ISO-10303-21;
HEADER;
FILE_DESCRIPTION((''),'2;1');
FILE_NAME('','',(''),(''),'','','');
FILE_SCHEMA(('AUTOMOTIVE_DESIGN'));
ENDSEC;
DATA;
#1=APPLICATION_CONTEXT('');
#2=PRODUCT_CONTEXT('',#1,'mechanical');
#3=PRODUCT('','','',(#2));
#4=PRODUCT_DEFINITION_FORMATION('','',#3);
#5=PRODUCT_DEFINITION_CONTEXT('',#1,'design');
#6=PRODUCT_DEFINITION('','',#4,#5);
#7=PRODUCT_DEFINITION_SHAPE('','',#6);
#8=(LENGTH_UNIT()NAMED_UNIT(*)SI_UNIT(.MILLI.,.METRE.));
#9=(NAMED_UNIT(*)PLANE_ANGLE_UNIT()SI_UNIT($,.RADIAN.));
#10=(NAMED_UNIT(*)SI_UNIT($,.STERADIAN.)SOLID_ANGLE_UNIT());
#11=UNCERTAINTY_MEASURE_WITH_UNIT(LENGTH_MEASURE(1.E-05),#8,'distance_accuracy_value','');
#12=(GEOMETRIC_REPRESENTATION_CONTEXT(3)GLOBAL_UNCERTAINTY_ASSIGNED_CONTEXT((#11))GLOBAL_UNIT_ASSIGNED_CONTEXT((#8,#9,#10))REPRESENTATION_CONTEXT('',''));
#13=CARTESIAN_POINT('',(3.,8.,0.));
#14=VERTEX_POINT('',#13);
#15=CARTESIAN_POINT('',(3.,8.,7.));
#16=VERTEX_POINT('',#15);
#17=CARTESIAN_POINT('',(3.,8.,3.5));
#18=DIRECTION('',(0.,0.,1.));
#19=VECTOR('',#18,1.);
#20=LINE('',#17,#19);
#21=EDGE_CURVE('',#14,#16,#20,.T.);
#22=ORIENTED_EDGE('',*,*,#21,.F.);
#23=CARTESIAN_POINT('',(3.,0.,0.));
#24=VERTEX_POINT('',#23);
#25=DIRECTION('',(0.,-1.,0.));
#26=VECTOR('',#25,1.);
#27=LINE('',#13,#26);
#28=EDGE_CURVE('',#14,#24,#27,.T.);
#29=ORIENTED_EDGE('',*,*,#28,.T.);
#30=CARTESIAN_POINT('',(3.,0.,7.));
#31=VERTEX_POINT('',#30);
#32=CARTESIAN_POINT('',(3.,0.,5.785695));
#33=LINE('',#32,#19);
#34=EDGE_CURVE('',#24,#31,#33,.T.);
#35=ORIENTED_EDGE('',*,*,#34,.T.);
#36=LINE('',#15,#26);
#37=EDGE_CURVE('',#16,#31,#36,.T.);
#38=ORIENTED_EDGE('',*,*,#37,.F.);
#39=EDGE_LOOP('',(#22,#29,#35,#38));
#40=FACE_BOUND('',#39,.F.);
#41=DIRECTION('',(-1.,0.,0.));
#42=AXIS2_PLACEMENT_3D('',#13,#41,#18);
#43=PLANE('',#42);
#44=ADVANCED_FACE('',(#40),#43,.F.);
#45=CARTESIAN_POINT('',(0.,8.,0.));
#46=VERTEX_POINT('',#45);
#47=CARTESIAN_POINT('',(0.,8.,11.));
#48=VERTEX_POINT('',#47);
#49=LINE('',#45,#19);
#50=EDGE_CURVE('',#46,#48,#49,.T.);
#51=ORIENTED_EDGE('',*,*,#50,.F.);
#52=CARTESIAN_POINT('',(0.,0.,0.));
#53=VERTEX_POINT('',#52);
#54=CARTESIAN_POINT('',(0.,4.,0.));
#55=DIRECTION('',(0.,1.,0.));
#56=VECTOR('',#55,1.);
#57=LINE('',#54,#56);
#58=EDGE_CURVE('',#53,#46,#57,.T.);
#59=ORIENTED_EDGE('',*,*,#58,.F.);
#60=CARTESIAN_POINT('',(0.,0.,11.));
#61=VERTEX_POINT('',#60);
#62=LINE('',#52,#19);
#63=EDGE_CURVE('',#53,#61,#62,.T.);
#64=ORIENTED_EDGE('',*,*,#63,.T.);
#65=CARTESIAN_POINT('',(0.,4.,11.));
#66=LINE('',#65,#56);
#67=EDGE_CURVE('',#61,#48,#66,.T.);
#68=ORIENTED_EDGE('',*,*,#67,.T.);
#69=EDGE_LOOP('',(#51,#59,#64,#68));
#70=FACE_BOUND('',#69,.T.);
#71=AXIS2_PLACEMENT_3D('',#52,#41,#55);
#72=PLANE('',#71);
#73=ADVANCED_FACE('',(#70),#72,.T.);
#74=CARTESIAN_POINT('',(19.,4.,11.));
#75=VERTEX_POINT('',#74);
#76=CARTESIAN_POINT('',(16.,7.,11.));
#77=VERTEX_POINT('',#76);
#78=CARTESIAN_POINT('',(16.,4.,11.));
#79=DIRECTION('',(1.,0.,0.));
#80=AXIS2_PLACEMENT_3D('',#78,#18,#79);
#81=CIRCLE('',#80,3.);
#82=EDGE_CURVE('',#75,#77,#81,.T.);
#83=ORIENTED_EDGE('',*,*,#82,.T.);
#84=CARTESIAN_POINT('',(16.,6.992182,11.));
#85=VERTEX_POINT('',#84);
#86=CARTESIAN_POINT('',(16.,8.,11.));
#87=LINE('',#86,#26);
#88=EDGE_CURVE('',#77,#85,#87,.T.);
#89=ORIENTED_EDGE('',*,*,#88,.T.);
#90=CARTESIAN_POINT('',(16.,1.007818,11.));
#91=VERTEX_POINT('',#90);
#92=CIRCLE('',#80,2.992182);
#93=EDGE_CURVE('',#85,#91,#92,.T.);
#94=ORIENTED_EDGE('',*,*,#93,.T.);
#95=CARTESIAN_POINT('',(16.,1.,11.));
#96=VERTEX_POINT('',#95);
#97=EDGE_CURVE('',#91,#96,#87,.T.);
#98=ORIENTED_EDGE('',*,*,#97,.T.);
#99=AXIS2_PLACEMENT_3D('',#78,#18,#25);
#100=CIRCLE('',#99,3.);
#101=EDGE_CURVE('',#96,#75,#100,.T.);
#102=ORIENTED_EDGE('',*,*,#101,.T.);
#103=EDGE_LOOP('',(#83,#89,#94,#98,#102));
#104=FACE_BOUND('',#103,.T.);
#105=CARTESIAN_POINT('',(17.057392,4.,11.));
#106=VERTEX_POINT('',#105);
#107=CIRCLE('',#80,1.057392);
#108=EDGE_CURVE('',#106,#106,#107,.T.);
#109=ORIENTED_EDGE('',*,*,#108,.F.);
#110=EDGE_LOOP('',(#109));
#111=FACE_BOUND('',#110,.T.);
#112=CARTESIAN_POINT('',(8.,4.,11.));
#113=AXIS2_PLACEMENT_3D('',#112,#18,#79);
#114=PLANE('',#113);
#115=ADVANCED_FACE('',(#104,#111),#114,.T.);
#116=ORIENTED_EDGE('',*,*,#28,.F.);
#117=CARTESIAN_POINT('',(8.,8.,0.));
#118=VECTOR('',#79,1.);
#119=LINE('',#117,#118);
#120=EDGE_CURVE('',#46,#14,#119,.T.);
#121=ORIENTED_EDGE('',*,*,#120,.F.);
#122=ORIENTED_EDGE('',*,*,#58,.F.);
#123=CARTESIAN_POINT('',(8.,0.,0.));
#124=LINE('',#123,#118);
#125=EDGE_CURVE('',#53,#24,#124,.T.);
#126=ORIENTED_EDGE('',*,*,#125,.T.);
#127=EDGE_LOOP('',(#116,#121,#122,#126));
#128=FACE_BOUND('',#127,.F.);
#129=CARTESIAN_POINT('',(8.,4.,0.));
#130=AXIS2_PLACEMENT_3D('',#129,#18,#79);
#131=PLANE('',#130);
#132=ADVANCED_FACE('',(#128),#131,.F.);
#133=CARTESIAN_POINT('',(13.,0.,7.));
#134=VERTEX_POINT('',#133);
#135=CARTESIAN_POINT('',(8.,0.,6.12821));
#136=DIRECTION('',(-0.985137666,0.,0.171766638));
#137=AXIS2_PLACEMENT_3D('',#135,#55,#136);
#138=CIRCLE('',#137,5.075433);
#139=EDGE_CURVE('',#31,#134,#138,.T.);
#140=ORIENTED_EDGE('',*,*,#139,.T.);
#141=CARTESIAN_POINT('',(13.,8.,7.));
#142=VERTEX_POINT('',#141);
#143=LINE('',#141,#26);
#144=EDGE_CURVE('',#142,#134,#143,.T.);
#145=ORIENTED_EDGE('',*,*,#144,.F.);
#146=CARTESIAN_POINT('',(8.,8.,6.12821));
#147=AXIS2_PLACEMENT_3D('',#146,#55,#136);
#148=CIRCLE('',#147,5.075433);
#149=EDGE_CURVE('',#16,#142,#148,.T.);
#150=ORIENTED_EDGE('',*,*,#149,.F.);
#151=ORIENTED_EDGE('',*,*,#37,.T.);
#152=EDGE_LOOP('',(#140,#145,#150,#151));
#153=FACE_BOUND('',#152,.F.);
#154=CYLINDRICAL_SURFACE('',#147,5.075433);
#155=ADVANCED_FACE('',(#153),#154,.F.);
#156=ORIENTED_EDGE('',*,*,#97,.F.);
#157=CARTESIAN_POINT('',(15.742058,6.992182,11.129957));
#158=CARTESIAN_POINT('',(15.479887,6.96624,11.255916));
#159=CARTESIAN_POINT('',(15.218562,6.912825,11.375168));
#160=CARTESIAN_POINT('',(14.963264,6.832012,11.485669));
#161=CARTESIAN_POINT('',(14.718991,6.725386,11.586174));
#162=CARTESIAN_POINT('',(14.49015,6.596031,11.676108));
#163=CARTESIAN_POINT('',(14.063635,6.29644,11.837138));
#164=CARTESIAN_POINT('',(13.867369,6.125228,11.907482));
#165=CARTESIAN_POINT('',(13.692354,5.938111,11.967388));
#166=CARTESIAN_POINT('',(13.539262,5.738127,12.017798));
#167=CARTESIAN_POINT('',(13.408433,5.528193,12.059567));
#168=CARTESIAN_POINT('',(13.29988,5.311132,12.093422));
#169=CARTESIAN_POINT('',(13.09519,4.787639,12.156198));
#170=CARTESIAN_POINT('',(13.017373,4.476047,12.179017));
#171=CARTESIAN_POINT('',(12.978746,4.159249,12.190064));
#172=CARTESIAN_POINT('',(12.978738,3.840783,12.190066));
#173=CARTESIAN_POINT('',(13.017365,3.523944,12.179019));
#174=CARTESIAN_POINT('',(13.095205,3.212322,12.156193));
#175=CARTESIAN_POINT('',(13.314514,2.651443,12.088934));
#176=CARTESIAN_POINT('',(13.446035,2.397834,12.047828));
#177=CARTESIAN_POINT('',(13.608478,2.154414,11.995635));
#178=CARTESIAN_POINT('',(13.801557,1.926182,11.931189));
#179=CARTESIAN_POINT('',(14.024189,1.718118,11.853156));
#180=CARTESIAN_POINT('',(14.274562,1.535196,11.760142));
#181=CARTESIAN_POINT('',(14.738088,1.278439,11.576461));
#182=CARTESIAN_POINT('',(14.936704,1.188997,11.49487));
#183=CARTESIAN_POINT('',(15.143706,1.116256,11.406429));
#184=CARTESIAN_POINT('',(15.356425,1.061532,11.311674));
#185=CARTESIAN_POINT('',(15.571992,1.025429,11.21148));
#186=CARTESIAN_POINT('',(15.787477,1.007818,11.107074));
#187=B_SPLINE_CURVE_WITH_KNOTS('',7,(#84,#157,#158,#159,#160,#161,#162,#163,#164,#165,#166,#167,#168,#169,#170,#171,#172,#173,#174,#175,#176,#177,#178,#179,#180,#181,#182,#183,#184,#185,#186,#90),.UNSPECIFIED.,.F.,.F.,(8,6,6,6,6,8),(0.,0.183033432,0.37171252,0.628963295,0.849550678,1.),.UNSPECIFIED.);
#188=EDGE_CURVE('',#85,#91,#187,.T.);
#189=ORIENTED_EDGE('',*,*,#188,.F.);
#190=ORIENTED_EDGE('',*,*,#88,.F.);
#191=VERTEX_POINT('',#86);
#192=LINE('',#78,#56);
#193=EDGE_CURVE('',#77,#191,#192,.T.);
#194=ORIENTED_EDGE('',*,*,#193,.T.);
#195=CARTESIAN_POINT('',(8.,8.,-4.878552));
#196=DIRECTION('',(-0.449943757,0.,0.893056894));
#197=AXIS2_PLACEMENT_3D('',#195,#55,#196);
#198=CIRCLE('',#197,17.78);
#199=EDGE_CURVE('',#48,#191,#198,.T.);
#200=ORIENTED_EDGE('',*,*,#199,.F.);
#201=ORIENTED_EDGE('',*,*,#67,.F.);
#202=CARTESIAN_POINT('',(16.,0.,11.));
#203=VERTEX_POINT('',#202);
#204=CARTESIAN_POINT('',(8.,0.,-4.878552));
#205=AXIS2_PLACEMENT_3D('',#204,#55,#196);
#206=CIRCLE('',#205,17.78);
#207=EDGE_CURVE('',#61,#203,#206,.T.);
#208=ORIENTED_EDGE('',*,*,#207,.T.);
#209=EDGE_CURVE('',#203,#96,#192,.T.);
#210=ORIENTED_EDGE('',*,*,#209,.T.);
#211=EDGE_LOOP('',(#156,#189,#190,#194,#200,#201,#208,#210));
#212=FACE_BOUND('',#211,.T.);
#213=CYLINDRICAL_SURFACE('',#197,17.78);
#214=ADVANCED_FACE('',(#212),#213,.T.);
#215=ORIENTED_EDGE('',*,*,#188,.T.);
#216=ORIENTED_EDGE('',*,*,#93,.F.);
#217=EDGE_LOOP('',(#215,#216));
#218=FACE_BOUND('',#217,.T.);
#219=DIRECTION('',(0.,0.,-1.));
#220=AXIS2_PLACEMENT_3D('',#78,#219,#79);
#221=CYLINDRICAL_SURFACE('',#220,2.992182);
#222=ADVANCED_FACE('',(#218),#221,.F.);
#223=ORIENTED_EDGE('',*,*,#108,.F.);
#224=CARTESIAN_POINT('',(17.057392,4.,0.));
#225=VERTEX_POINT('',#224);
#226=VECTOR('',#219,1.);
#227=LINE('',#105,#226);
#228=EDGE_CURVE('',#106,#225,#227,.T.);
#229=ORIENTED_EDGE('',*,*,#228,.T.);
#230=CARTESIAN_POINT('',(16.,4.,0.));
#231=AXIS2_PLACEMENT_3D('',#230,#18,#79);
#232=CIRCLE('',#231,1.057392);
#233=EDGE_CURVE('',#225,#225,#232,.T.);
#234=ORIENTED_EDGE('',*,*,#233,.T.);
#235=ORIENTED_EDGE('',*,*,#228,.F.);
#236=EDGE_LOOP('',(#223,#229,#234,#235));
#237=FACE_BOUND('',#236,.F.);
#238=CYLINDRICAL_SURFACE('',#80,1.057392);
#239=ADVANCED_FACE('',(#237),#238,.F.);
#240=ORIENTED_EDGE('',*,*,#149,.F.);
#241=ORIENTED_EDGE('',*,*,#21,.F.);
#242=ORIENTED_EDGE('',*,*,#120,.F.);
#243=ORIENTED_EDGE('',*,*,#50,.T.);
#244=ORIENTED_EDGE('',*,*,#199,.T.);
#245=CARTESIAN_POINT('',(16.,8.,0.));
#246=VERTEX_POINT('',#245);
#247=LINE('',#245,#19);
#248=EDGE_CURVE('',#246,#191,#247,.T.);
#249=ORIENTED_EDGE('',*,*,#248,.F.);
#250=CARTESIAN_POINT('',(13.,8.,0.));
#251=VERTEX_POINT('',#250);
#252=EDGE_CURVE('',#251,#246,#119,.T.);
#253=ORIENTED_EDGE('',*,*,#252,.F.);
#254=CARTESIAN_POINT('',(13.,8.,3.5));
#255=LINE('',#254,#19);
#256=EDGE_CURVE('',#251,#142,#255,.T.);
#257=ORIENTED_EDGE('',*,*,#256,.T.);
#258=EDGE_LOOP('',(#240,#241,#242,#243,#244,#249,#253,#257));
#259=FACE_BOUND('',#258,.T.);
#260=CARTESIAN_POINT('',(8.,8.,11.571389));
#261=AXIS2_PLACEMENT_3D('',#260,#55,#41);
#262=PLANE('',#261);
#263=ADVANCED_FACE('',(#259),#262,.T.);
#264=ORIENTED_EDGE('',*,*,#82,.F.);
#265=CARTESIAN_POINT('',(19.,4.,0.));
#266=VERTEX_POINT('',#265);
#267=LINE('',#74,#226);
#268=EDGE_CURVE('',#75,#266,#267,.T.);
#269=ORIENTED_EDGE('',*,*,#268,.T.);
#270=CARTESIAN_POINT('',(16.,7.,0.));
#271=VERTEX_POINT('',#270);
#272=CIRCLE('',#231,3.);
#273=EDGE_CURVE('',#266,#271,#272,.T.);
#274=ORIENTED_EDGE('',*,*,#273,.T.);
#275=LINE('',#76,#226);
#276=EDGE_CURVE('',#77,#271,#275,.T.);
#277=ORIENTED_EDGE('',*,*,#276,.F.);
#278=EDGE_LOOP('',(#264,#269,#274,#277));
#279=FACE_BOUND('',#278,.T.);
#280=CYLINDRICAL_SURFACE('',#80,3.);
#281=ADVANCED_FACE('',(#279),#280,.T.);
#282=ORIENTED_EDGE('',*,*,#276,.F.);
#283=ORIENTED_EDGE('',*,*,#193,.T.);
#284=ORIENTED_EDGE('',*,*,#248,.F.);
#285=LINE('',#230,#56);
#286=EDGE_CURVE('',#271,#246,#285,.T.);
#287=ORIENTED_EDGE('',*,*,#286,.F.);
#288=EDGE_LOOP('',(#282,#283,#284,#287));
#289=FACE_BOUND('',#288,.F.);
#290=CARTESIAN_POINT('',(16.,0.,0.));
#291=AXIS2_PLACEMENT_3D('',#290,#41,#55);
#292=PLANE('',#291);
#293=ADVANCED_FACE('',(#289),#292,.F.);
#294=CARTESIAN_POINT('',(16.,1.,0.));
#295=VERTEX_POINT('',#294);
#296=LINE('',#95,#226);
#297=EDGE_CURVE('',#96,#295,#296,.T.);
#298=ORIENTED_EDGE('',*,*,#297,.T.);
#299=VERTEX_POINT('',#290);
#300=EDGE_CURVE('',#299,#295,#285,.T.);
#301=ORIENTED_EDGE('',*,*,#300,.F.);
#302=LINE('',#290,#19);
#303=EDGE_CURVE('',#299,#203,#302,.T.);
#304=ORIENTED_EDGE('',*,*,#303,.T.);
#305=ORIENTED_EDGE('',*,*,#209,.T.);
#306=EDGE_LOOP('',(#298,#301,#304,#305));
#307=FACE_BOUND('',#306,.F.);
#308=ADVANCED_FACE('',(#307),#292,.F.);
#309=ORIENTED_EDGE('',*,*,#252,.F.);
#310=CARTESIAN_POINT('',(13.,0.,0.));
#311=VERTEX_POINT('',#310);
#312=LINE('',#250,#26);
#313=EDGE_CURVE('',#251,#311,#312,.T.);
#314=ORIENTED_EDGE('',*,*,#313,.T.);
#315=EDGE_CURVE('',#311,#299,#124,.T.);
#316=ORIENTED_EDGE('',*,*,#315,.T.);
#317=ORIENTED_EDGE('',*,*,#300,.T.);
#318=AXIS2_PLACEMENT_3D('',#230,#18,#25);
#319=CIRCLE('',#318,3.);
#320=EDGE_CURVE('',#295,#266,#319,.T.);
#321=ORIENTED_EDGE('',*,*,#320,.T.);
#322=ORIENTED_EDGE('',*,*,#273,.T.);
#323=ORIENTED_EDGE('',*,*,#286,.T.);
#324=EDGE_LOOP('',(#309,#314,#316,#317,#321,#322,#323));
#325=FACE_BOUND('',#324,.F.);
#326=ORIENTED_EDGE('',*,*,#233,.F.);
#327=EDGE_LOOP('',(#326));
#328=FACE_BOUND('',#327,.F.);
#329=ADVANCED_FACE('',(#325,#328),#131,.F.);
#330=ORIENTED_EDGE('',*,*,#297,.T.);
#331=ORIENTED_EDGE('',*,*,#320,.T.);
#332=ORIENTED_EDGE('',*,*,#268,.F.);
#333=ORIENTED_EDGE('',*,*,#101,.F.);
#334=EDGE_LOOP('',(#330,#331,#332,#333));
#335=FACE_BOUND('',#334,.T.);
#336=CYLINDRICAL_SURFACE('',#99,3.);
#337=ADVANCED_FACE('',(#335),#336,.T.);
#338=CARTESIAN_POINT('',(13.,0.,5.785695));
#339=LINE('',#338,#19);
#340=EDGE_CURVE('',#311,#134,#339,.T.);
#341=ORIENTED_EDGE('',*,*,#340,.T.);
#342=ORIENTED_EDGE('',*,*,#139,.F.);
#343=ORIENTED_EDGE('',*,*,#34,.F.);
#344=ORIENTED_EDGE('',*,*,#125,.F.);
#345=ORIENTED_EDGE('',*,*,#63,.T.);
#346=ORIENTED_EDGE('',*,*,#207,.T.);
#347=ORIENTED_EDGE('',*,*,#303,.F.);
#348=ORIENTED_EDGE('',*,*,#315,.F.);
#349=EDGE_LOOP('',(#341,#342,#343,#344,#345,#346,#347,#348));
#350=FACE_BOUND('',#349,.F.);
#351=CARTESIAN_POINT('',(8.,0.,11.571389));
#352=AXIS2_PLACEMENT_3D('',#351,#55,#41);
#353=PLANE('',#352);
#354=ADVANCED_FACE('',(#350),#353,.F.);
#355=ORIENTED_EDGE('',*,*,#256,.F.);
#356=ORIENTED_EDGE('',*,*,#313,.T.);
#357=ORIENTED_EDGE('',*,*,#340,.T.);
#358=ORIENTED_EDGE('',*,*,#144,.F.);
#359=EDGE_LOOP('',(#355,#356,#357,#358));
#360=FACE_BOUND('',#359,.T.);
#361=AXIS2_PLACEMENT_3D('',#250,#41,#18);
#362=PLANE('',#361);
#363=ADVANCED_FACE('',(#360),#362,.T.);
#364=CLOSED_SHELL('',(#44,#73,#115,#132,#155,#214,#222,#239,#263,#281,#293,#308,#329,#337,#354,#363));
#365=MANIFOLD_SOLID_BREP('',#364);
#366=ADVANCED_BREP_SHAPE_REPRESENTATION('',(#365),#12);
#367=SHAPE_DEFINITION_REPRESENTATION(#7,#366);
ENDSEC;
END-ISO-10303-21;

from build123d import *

# Parameters (mm, degrees)
F0_W      = 16
F0_H      = 8
F1_DEPTH  = 11
F3_DEPTH  = 11
F5_DEPTH  = 8
F6_W      = 10
F6_H      = 7
F7_DEPTH  = 25.4
F9_DEPTH  = 25.4
F10_R     = 2.9921817394
F11_DEPTH = 25.4
F12_R     = 1.0573915373
F13_DEPTH = 25.4


with BuildPart() as f1:
    # F0 (on Top) → F1 (new body)
    with BuildSketch(Plane.XY):
        with Locations((8, 4)):
            Rectangle(F0_W, F0_H)
    extrude(amount=F1_DEPTH)

    # F2 (on face) → F3 (join)
    with BuildSketch(Plane.XY.offset(11)):
        with BuildLine():
            Line((16, 7), (16, 1))
            ThreePointArc((16, 1), (18.1213203436, 1.8786796564), (19, 4))
            ThreePointArc((19, 4), (18.1213203436, 6.1213203436), (16, 7))
        make_face()
    extrude(amount=-F3_DEPTH)

    # F4 (on face) → F5 (join)
    with BuildSketch(Plane(origin=(0, 8, 0), x_dir=(-1, 0, 0), z_dir=(0, 1, 0))):
        with BuildLine():
            Line((-16, 11), (0, 11))
            ThreePointArc((0, 11), (-8, 12.9014484288), (-16, 11))
        make_face()
    extrude(amount=-F5_DEPTH)

    # F6 (on face) → F7 (cut)
    with BuildSketch(Plane(origin=(0, 8, 0), x_dir=(-1, 0, 0), z_dir=(0, 1, 0))):
        with Locations((-8, 3.5)):
            Rectangle(F6_W, F6_H)
    extrude(amount=-F7_DEPTH, mode=Mode.SUBTRACT)

    # F8 (on face) → F9 (cut)
    with BuildSketch(Plane(origin=(0, 8, 0), x_dir=(-1, 0, 0), z_dir=(0, 1, 0))):
        with BuildLine():
            Line((-13, 7), (-3, 7))
            ThreePointArc((-3, 7), (-8, 11.2036427481), (-13, 7))
        make_face()
    extrude(amount=-F9_DEPTH, mode=Mode.SUBTRACT)

    # F10 (on face) → F11 (cut)
    with BuildSketch(Plane.XY.offset(11)):
        with Locations((16, 4)):
            Circle(F10_R)
    extrude(amount=F11_DEPTH, mode=Mode.SUBTRACT)

    # F12 (on face) → F13 (cut)
    with BuildSketch(Plane.XY.offset(11)):
        with Locations((16, 4)):
            Circle(F12_R)
    extrude(amount=-F13_DEPTH, mode=Mode.SUBTRACT)


solid = f1.part
